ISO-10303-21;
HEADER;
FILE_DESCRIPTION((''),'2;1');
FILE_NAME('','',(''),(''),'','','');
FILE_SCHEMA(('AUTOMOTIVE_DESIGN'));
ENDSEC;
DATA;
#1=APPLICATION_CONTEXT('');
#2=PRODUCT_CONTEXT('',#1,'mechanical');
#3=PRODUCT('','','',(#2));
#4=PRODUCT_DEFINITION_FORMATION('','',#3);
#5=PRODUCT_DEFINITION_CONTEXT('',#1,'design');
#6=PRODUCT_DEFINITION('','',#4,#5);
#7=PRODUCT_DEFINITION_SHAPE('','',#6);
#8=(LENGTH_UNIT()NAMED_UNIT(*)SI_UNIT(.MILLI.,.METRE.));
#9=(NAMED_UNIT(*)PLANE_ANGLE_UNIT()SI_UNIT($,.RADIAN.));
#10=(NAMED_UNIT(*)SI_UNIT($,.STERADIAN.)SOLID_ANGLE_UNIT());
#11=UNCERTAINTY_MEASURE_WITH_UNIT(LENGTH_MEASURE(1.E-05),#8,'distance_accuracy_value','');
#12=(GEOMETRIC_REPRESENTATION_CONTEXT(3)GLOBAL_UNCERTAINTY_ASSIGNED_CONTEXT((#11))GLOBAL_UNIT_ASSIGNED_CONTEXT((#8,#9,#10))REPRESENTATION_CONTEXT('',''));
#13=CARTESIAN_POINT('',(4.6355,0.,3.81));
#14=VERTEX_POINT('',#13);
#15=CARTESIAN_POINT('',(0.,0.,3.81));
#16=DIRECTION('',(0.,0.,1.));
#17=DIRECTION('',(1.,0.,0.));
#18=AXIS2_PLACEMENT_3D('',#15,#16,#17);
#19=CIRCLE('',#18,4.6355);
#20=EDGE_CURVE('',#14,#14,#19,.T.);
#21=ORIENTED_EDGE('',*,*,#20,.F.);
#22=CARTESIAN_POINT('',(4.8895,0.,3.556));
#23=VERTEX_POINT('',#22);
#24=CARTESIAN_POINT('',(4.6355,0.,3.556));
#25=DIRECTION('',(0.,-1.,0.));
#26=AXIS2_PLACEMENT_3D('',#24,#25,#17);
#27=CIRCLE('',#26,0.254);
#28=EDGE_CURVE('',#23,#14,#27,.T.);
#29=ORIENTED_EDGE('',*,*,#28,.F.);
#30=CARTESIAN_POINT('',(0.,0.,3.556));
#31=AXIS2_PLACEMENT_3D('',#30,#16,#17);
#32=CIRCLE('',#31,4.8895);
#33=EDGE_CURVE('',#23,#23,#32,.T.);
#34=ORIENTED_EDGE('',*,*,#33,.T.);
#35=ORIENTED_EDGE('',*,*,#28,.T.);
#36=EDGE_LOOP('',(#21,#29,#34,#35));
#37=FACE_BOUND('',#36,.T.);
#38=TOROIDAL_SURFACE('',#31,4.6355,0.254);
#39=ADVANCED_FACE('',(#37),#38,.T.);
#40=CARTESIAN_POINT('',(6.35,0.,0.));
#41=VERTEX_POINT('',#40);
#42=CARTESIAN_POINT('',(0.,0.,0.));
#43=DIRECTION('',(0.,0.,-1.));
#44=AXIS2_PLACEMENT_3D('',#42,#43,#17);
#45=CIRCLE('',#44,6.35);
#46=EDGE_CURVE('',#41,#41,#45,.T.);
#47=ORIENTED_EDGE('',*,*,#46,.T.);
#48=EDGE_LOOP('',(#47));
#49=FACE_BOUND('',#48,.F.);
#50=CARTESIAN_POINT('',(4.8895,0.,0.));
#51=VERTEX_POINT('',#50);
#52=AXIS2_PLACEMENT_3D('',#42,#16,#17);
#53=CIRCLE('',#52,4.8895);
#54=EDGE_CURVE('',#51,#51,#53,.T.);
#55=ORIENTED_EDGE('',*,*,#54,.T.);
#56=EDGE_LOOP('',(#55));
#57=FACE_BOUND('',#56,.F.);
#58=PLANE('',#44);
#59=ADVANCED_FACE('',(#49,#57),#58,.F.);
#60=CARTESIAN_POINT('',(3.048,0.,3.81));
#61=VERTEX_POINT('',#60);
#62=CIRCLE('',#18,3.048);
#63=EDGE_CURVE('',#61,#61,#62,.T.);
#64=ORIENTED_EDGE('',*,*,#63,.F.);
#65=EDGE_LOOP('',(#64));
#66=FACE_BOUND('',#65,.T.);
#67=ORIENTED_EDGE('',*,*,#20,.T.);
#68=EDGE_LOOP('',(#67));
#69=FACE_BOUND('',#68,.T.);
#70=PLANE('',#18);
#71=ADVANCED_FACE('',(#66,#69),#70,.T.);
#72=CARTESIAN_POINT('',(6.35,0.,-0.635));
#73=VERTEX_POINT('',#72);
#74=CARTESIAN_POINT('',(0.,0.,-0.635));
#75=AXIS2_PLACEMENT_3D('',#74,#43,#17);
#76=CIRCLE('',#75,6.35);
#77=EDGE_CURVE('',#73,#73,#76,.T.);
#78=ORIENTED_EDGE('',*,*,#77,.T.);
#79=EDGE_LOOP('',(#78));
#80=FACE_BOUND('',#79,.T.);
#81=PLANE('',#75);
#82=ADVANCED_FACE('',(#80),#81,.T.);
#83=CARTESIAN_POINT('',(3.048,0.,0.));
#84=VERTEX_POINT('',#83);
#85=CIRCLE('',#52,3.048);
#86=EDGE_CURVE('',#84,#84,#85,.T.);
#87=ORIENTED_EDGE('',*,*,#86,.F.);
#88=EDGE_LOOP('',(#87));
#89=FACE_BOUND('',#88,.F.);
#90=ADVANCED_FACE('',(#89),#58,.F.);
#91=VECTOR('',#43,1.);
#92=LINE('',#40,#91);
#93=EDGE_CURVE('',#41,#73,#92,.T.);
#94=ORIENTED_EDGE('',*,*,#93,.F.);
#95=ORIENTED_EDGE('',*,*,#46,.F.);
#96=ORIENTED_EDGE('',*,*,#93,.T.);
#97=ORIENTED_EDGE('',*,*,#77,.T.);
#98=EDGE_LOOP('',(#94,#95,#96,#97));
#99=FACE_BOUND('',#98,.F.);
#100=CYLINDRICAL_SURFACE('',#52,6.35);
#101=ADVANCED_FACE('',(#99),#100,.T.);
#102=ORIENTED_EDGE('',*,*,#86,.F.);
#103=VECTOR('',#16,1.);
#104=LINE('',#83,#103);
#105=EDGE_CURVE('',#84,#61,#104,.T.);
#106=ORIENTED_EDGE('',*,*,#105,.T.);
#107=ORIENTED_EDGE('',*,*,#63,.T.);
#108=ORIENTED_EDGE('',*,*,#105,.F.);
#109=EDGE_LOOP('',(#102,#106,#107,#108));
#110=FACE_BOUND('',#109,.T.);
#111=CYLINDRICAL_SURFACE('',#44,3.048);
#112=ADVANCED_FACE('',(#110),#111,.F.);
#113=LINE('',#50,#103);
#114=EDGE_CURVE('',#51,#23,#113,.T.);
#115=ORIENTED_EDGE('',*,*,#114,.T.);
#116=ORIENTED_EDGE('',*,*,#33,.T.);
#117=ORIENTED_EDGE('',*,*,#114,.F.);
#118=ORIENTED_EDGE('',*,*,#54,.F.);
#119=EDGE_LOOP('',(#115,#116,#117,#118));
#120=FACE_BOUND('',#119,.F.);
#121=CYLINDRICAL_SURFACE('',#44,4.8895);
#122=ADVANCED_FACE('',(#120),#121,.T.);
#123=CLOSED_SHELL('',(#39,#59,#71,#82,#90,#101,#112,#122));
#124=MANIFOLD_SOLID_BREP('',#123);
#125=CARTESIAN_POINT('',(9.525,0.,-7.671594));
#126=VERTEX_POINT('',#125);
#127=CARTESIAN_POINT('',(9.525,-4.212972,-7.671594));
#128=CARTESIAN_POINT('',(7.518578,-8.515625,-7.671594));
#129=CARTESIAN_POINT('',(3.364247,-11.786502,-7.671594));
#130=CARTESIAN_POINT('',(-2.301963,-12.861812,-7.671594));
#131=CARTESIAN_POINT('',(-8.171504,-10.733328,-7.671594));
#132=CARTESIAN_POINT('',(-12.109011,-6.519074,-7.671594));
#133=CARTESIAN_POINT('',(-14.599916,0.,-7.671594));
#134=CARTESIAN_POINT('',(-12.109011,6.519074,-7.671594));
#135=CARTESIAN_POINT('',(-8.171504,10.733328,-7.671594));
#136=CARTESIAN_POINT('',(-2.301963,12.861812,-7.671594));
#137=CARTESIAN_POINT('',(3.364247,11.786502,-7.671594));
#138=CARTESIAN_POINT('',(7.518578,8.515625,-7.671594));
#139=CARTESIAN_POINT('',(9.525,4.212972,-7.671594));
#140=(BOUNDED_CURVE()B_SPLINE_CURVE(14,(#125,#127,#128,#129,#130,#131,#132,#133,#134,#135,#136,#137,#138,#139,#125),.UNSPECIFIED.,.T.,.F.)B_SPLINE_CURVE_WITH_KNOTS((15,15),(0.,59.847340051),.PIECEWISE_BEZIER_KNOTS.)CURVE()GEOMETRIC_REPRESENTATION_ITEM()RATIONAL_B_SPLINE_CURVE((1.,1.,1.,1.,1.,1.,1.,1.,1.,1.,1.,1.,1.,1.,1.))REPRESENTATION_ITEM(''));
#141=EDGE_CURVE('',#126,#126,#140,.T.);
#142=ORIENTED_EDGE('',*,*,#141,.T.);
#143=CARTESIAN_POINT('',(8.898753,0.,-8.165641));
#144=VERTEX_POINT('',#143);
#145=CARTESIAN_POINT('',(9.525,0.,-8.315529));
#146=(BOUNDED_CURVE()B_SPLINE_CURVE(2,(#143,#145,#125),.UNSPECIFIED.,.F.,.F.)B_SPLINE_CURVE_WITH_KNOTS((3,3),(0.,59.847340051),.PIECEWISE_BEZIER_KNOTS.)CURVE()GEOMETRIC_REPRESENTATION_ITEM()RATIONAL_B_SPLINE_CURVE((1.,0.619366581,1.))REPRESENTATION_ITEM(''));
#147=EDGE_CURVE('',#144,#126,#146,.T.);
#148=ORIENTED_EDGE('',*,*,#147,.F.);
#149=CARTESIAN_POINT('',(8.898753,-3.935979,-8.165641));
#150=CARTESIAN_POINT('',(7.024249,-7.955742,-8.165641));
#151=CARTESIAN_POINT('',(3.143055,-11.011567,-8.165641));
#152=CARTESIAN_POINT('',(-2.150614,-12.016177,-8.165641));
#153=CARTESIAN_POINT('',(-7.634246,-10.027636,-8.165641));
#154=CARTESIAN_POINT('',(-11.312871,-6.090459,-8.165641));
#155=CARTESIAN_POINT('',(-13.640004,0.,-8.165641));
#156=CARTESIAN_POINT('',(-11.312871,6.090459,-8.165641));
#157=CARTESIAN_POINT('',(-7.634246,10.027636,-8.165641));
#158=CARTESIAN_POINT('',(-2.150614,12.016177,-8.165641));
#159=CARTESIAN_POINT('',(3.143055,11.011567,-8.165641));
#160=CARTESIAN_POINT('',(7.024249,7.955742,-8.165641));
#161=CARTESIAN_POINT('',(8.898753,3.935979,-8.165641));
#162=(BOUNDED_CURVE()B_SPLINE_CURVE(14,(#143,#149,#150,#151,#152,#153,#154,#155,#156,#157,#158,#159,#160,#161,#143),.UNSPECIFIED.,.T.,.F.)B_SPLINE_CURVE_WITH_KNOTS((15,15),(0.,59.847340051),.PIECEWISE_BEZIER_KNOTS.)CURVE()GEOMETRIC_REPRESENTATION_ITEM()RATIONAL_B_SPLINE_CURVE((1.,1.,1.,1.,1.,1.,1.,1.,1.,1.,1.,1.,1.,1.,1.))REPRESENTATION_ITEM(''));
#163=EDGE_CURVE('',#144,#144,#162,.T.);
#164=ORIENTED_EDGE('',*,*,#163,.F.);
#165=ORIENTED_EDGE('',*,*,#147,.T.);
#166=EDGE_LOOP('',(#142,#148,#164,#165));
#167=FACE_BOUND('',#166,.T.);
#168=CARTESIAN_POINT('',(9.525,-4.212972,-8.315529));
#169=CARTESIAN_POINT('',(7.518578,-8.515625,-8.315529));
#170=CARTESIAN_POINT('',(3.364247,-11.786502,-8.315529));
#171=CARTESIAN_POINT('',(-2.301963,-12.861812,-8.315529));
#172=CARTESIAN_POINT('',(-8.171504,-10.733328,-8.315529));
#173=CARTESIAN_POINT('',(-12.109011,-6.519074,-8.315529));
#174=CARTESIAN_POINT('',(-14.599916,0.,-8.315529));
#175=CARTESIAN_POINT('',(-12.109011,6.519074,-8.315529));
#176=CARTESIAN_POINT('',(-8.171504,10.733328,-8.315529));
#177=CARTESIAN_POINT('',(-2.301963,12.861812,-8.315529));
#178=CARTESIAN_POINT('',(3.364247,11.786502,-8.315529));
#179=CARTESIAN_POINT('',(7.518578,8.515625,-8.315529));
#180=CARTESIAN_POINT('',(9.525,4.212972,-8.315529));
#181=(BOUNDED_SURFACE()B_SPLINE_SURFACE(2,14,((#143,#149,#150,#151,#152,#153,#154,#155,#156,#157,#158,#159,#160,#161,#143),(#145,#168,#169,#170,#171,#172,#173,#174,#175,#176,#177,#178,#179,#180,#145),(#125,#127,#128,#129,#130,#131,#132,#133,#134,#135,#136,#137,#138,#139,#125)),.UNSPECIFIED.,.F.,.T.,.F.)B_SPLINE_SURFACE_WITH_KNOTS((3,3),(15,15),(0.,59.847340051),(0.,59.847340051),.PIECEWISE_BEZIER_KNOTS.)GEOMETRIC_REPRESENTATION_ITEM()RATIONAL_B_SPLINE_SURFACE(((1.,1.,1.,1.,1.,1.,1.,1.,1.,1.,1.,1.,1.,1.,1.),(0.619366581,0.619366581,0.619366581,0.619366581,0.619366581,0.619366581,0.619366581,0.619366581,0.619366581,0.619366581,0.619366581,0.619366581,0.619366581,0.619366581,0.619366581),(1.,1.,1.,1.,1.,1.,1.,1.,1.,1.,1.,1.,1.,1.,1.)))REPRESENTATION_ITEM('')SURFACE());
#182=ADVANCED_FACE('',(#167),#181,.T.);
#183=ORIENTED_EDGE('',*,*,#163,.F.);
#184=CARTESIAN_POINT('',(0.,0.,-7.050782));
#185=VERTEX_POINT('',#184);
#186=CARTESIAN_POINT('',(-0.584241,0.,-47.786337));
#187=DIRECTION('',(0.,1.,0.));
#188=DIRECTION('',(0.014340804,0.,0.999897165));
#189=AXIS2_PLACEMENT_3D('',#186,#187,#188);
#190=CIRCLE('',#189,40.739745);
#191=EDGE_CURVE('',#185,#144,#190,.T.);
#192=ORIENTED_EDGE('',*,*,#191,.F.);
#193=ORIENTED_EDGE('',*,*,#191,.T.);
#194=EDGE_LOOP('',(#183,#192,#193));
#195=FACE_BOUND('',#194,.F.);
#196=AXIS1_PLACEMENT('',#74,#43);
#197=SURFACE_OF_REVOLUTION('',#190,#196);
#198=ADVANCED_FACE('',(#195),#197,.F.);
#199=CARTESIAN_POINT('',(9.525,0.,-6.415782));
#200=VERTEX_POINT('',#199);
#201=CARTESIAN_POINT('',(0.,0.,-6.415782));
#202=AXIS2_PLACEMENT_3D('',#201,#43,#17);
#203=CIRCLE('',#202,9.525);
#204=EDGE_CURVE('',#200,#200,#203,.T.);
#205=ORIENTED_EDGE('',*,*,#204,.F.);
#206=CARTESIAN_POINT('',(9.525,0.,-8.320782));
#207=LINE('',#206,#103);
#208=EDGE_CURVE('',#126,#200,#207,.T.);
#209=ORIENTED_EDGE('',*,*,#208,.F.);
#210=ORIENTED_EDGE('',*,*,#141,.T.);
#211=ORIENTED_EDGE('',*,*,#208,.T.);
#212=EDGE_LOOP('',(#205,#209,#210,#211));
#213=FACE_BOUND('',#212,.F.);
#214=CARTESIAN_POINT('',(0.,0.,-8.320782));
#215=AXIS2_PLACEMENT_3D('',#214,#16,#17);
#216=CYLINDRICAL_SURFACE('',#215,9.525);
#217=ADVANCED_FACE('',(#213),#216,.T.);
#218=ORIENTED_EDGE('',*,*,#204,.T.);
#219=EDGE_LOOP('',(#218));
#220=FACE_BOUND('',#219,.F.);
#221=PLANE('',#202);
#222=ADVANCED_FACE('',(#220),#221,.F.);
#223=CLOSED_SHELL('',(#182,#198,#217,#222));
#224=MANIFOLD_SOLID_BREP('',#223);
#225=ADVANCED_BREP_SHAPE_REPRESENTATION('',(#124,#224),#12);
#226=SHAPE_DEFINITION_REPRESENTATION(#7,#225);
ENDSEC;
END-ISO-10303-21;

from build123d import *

# Parameters (mm, degrees)
F0_R     = 4.8895
F0_R_2   = 3.048
F1_DEPTH = 3.81
F2_R     = 6.35
F2_R_2   = 4.8895
F2_R_3   = 3.048
F3_DEPTH = 0.635
F6_R     = 0.508
F7_R     = 0.254


with BuildPart() as f1:
    # F0 (on Top) → F1 (new body)
    with BuildSketch(Plane.XY):
        Circle(F0_R)
        Circle(F0_R_2, mode=Mode.SUBTRACT)
    extrude(amount=F1_DEPTH)

    # F2 (on face) → F3 (join)
    with BuildSketch(Plane(origin=(0, 0, 0), x_dir=(1, 0, 0), z_dir=(0, 0, -1))):
        Circle(F2_R)
        Circle(F2_R_2, mode=Mode.SUBTRACT)
        Circle(F2_R_2)
        Circle(F2_R_3, mode=Mode.SUBTRACT)
        Circle(F2_R_3)
    extrude(amount=F3_DEPTH)

    # F7
    f7_edges = [f1.edges().sort_by_distance(p)[0] for p in [
        (-4.8895, 0, 3.81),
    ]]
    fillet(f7_edges, radius=F7_R)


with BuildPart() as f5:
    # F4 (on Front) → F5 (revolve)
    with BuildSketch(Plane.XZ):
        with BuildLine():
            Line((9.525, -6.4157823257), (0, -6.4157823257))
            Line((0, -6.4157823257), (0, -7.0507823257))
            ThreePointArc((0, -7.0507823257), (4.8000755161, -7.403965955), (9.525, -8.3207823257))
            Line((9.525, -8.3207823257), (9.525, -6.4157823257))
        make_face()
    revolve(axis=Axis((0, 0, -0.635), (0, 0, -1)))

    # F6
    f6_edges = [f5.edges().sort_by_distance(p)[0] for p in [
        (-9.525, 0, -8.320782),
    ]]
    fillet(f6_edges, radius=F6_R)


solid = Compound([f1.part, f5.part])
